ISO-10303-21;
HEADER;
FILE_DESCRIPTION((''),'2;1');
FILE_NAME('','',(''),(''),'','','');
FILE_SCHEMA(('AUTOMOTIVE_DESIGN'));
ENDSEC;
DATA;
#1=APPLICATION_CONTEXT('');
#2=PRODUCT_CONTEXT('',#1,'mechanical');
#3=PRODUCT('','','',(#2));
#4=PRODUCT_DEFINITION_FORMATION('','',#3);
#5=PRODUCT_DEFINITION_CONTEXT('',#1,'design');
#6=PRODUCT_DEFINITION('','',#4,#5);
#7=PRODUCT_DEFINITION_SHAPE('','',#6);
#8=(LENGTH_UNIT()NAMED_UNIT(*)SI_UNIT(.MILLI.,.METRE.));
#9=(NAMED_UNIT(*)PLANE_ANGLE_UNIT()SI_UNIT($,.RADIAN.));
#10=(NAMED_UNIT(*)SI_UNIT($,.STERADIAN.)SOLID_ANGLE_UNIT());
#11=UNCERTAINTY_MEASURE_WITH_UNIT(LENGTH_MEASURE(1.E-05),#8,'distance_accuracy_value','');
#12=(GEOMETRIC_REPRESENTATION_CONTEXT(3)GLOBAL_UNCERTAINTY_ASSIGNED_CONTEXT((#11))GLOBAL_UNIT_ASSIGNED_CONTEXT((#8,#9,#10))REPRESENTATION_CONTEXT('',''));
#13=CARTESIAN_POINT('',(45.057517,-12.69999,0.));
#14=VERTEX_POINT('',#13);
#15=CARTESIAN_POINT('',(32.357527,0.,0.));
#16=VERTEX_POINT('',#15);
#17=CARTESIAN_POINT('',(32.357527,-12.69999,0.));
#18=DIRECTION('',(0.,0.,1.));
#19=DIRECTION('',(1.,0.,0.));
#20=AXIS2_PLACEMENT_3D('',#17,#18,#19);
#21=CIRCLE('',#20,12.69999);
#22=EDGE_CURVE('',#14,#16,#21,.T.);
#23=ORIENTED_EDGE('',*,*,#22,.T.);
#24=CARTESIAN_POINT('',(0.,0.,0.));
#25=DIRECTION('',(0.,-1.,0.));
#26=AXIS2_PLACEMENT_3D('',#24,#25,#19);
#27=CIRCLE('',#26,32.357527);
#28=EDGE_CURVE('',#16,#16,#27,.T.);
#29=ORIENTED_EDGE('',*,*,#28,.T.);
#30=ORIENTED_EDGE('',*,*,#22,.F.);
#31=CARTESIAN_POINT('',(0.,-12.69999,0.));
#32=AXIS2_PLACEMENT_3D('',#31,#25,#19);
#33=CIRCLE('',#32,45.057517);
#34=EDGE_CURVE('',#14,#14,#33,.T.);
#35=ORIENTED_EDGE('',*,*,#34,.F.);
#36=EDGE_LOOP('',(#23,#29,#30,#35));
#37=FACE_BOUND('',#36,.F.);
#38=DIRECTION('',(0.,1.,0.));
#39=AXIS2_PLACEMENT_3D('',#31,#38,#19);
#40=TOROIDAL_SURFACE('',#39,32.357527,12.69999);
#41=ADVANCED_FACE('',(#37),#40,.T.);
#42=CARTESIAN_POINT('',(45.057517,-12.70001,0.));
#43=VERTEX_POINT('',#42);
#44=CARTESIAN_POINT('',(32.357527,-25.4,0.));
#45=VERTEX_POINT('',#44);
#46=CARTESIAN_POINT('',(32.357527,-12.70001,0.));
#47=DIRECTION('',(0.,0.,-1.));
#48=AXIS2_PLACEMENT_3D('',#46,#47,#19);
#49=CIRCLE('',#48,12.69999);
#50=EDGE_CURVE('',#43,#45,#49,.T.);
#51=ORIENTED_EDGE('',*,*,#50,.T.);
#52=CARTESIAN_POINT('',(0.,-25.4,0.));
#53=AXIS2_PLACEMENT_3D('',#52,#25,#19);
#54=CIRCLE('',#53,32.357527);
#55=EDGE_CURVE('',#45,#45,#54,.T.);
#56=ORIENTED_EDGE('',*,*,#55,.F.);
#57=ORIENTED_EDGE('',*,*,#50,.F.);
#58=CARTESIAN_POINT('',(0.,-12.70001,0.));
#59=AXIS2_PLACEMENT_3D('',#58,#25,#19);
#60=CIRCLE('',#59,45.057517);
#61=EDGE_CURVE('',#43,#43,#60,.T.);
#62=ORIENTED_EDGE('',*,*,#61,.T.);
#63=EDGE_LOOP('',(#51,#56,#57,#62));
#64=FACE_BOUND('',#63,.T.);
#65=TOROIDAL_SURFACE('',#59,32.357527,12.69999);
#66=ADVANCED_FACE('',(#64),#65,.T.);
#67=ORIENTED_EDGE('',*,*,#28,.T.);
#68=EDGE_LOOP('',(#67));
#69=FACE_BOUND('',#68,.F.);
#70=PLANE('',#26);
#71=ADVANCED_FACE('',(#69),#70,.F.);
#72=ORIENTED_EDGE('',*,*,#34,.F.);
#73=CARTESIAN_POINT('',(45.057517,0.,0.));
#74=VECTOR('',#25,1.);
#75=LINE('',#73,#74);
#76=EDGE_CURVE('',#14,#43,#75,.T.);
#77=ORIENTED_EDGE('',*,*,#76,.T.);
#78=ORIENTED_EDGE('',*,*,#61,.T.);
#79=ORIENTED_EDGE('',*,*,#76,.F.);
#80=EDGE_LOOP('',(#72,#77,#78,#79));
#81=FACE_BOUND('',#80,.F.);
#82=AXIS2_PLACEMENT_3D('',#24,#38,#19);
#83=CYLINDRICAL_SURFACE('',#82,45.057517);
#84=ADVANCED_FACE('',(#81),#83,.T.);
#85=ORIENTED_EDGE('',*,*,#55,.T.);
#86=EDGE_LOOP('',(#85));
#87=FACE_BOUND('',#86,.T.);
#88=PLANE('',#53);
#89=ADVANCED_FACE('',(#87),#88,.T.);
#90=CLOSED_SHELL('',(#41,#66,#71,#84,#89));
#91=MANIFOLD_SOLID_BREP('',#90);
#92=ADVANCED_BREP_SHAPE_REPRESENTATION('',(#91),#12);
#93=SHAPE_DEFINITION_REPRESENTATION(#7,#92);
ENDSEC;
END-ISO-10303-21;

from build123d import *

# Parameters (mm, degrees)
F0_R     = 45.0575167081
F1_DEPTH = 25.4
F2_R     = 12.69999


# Not quite as in the source:
# - a fillet or chamfer is up to 0.001 mm smaller than in the source, because OpenCascade refuses the exact size


with BuildPart() as f1:
    # F0 (on Front) → F1 (new body)
    with BuildSketch(Plane.XZ):
        Circle(F0_R)
    extrude(amount=F1_DEPTH)

    # F2 (radius 12.7 in the source; OpenCascade refuses exactly that, so slightly less here)
    f2_edges = [f1.edges().sort_by_distance(p)[0] for p in [
        (-45.057517, -25.4, 0),
        (-45.057517, 0, 0),
    ]]
    fillet(f2_edges, radius=F2_R)


solid = f1.part
